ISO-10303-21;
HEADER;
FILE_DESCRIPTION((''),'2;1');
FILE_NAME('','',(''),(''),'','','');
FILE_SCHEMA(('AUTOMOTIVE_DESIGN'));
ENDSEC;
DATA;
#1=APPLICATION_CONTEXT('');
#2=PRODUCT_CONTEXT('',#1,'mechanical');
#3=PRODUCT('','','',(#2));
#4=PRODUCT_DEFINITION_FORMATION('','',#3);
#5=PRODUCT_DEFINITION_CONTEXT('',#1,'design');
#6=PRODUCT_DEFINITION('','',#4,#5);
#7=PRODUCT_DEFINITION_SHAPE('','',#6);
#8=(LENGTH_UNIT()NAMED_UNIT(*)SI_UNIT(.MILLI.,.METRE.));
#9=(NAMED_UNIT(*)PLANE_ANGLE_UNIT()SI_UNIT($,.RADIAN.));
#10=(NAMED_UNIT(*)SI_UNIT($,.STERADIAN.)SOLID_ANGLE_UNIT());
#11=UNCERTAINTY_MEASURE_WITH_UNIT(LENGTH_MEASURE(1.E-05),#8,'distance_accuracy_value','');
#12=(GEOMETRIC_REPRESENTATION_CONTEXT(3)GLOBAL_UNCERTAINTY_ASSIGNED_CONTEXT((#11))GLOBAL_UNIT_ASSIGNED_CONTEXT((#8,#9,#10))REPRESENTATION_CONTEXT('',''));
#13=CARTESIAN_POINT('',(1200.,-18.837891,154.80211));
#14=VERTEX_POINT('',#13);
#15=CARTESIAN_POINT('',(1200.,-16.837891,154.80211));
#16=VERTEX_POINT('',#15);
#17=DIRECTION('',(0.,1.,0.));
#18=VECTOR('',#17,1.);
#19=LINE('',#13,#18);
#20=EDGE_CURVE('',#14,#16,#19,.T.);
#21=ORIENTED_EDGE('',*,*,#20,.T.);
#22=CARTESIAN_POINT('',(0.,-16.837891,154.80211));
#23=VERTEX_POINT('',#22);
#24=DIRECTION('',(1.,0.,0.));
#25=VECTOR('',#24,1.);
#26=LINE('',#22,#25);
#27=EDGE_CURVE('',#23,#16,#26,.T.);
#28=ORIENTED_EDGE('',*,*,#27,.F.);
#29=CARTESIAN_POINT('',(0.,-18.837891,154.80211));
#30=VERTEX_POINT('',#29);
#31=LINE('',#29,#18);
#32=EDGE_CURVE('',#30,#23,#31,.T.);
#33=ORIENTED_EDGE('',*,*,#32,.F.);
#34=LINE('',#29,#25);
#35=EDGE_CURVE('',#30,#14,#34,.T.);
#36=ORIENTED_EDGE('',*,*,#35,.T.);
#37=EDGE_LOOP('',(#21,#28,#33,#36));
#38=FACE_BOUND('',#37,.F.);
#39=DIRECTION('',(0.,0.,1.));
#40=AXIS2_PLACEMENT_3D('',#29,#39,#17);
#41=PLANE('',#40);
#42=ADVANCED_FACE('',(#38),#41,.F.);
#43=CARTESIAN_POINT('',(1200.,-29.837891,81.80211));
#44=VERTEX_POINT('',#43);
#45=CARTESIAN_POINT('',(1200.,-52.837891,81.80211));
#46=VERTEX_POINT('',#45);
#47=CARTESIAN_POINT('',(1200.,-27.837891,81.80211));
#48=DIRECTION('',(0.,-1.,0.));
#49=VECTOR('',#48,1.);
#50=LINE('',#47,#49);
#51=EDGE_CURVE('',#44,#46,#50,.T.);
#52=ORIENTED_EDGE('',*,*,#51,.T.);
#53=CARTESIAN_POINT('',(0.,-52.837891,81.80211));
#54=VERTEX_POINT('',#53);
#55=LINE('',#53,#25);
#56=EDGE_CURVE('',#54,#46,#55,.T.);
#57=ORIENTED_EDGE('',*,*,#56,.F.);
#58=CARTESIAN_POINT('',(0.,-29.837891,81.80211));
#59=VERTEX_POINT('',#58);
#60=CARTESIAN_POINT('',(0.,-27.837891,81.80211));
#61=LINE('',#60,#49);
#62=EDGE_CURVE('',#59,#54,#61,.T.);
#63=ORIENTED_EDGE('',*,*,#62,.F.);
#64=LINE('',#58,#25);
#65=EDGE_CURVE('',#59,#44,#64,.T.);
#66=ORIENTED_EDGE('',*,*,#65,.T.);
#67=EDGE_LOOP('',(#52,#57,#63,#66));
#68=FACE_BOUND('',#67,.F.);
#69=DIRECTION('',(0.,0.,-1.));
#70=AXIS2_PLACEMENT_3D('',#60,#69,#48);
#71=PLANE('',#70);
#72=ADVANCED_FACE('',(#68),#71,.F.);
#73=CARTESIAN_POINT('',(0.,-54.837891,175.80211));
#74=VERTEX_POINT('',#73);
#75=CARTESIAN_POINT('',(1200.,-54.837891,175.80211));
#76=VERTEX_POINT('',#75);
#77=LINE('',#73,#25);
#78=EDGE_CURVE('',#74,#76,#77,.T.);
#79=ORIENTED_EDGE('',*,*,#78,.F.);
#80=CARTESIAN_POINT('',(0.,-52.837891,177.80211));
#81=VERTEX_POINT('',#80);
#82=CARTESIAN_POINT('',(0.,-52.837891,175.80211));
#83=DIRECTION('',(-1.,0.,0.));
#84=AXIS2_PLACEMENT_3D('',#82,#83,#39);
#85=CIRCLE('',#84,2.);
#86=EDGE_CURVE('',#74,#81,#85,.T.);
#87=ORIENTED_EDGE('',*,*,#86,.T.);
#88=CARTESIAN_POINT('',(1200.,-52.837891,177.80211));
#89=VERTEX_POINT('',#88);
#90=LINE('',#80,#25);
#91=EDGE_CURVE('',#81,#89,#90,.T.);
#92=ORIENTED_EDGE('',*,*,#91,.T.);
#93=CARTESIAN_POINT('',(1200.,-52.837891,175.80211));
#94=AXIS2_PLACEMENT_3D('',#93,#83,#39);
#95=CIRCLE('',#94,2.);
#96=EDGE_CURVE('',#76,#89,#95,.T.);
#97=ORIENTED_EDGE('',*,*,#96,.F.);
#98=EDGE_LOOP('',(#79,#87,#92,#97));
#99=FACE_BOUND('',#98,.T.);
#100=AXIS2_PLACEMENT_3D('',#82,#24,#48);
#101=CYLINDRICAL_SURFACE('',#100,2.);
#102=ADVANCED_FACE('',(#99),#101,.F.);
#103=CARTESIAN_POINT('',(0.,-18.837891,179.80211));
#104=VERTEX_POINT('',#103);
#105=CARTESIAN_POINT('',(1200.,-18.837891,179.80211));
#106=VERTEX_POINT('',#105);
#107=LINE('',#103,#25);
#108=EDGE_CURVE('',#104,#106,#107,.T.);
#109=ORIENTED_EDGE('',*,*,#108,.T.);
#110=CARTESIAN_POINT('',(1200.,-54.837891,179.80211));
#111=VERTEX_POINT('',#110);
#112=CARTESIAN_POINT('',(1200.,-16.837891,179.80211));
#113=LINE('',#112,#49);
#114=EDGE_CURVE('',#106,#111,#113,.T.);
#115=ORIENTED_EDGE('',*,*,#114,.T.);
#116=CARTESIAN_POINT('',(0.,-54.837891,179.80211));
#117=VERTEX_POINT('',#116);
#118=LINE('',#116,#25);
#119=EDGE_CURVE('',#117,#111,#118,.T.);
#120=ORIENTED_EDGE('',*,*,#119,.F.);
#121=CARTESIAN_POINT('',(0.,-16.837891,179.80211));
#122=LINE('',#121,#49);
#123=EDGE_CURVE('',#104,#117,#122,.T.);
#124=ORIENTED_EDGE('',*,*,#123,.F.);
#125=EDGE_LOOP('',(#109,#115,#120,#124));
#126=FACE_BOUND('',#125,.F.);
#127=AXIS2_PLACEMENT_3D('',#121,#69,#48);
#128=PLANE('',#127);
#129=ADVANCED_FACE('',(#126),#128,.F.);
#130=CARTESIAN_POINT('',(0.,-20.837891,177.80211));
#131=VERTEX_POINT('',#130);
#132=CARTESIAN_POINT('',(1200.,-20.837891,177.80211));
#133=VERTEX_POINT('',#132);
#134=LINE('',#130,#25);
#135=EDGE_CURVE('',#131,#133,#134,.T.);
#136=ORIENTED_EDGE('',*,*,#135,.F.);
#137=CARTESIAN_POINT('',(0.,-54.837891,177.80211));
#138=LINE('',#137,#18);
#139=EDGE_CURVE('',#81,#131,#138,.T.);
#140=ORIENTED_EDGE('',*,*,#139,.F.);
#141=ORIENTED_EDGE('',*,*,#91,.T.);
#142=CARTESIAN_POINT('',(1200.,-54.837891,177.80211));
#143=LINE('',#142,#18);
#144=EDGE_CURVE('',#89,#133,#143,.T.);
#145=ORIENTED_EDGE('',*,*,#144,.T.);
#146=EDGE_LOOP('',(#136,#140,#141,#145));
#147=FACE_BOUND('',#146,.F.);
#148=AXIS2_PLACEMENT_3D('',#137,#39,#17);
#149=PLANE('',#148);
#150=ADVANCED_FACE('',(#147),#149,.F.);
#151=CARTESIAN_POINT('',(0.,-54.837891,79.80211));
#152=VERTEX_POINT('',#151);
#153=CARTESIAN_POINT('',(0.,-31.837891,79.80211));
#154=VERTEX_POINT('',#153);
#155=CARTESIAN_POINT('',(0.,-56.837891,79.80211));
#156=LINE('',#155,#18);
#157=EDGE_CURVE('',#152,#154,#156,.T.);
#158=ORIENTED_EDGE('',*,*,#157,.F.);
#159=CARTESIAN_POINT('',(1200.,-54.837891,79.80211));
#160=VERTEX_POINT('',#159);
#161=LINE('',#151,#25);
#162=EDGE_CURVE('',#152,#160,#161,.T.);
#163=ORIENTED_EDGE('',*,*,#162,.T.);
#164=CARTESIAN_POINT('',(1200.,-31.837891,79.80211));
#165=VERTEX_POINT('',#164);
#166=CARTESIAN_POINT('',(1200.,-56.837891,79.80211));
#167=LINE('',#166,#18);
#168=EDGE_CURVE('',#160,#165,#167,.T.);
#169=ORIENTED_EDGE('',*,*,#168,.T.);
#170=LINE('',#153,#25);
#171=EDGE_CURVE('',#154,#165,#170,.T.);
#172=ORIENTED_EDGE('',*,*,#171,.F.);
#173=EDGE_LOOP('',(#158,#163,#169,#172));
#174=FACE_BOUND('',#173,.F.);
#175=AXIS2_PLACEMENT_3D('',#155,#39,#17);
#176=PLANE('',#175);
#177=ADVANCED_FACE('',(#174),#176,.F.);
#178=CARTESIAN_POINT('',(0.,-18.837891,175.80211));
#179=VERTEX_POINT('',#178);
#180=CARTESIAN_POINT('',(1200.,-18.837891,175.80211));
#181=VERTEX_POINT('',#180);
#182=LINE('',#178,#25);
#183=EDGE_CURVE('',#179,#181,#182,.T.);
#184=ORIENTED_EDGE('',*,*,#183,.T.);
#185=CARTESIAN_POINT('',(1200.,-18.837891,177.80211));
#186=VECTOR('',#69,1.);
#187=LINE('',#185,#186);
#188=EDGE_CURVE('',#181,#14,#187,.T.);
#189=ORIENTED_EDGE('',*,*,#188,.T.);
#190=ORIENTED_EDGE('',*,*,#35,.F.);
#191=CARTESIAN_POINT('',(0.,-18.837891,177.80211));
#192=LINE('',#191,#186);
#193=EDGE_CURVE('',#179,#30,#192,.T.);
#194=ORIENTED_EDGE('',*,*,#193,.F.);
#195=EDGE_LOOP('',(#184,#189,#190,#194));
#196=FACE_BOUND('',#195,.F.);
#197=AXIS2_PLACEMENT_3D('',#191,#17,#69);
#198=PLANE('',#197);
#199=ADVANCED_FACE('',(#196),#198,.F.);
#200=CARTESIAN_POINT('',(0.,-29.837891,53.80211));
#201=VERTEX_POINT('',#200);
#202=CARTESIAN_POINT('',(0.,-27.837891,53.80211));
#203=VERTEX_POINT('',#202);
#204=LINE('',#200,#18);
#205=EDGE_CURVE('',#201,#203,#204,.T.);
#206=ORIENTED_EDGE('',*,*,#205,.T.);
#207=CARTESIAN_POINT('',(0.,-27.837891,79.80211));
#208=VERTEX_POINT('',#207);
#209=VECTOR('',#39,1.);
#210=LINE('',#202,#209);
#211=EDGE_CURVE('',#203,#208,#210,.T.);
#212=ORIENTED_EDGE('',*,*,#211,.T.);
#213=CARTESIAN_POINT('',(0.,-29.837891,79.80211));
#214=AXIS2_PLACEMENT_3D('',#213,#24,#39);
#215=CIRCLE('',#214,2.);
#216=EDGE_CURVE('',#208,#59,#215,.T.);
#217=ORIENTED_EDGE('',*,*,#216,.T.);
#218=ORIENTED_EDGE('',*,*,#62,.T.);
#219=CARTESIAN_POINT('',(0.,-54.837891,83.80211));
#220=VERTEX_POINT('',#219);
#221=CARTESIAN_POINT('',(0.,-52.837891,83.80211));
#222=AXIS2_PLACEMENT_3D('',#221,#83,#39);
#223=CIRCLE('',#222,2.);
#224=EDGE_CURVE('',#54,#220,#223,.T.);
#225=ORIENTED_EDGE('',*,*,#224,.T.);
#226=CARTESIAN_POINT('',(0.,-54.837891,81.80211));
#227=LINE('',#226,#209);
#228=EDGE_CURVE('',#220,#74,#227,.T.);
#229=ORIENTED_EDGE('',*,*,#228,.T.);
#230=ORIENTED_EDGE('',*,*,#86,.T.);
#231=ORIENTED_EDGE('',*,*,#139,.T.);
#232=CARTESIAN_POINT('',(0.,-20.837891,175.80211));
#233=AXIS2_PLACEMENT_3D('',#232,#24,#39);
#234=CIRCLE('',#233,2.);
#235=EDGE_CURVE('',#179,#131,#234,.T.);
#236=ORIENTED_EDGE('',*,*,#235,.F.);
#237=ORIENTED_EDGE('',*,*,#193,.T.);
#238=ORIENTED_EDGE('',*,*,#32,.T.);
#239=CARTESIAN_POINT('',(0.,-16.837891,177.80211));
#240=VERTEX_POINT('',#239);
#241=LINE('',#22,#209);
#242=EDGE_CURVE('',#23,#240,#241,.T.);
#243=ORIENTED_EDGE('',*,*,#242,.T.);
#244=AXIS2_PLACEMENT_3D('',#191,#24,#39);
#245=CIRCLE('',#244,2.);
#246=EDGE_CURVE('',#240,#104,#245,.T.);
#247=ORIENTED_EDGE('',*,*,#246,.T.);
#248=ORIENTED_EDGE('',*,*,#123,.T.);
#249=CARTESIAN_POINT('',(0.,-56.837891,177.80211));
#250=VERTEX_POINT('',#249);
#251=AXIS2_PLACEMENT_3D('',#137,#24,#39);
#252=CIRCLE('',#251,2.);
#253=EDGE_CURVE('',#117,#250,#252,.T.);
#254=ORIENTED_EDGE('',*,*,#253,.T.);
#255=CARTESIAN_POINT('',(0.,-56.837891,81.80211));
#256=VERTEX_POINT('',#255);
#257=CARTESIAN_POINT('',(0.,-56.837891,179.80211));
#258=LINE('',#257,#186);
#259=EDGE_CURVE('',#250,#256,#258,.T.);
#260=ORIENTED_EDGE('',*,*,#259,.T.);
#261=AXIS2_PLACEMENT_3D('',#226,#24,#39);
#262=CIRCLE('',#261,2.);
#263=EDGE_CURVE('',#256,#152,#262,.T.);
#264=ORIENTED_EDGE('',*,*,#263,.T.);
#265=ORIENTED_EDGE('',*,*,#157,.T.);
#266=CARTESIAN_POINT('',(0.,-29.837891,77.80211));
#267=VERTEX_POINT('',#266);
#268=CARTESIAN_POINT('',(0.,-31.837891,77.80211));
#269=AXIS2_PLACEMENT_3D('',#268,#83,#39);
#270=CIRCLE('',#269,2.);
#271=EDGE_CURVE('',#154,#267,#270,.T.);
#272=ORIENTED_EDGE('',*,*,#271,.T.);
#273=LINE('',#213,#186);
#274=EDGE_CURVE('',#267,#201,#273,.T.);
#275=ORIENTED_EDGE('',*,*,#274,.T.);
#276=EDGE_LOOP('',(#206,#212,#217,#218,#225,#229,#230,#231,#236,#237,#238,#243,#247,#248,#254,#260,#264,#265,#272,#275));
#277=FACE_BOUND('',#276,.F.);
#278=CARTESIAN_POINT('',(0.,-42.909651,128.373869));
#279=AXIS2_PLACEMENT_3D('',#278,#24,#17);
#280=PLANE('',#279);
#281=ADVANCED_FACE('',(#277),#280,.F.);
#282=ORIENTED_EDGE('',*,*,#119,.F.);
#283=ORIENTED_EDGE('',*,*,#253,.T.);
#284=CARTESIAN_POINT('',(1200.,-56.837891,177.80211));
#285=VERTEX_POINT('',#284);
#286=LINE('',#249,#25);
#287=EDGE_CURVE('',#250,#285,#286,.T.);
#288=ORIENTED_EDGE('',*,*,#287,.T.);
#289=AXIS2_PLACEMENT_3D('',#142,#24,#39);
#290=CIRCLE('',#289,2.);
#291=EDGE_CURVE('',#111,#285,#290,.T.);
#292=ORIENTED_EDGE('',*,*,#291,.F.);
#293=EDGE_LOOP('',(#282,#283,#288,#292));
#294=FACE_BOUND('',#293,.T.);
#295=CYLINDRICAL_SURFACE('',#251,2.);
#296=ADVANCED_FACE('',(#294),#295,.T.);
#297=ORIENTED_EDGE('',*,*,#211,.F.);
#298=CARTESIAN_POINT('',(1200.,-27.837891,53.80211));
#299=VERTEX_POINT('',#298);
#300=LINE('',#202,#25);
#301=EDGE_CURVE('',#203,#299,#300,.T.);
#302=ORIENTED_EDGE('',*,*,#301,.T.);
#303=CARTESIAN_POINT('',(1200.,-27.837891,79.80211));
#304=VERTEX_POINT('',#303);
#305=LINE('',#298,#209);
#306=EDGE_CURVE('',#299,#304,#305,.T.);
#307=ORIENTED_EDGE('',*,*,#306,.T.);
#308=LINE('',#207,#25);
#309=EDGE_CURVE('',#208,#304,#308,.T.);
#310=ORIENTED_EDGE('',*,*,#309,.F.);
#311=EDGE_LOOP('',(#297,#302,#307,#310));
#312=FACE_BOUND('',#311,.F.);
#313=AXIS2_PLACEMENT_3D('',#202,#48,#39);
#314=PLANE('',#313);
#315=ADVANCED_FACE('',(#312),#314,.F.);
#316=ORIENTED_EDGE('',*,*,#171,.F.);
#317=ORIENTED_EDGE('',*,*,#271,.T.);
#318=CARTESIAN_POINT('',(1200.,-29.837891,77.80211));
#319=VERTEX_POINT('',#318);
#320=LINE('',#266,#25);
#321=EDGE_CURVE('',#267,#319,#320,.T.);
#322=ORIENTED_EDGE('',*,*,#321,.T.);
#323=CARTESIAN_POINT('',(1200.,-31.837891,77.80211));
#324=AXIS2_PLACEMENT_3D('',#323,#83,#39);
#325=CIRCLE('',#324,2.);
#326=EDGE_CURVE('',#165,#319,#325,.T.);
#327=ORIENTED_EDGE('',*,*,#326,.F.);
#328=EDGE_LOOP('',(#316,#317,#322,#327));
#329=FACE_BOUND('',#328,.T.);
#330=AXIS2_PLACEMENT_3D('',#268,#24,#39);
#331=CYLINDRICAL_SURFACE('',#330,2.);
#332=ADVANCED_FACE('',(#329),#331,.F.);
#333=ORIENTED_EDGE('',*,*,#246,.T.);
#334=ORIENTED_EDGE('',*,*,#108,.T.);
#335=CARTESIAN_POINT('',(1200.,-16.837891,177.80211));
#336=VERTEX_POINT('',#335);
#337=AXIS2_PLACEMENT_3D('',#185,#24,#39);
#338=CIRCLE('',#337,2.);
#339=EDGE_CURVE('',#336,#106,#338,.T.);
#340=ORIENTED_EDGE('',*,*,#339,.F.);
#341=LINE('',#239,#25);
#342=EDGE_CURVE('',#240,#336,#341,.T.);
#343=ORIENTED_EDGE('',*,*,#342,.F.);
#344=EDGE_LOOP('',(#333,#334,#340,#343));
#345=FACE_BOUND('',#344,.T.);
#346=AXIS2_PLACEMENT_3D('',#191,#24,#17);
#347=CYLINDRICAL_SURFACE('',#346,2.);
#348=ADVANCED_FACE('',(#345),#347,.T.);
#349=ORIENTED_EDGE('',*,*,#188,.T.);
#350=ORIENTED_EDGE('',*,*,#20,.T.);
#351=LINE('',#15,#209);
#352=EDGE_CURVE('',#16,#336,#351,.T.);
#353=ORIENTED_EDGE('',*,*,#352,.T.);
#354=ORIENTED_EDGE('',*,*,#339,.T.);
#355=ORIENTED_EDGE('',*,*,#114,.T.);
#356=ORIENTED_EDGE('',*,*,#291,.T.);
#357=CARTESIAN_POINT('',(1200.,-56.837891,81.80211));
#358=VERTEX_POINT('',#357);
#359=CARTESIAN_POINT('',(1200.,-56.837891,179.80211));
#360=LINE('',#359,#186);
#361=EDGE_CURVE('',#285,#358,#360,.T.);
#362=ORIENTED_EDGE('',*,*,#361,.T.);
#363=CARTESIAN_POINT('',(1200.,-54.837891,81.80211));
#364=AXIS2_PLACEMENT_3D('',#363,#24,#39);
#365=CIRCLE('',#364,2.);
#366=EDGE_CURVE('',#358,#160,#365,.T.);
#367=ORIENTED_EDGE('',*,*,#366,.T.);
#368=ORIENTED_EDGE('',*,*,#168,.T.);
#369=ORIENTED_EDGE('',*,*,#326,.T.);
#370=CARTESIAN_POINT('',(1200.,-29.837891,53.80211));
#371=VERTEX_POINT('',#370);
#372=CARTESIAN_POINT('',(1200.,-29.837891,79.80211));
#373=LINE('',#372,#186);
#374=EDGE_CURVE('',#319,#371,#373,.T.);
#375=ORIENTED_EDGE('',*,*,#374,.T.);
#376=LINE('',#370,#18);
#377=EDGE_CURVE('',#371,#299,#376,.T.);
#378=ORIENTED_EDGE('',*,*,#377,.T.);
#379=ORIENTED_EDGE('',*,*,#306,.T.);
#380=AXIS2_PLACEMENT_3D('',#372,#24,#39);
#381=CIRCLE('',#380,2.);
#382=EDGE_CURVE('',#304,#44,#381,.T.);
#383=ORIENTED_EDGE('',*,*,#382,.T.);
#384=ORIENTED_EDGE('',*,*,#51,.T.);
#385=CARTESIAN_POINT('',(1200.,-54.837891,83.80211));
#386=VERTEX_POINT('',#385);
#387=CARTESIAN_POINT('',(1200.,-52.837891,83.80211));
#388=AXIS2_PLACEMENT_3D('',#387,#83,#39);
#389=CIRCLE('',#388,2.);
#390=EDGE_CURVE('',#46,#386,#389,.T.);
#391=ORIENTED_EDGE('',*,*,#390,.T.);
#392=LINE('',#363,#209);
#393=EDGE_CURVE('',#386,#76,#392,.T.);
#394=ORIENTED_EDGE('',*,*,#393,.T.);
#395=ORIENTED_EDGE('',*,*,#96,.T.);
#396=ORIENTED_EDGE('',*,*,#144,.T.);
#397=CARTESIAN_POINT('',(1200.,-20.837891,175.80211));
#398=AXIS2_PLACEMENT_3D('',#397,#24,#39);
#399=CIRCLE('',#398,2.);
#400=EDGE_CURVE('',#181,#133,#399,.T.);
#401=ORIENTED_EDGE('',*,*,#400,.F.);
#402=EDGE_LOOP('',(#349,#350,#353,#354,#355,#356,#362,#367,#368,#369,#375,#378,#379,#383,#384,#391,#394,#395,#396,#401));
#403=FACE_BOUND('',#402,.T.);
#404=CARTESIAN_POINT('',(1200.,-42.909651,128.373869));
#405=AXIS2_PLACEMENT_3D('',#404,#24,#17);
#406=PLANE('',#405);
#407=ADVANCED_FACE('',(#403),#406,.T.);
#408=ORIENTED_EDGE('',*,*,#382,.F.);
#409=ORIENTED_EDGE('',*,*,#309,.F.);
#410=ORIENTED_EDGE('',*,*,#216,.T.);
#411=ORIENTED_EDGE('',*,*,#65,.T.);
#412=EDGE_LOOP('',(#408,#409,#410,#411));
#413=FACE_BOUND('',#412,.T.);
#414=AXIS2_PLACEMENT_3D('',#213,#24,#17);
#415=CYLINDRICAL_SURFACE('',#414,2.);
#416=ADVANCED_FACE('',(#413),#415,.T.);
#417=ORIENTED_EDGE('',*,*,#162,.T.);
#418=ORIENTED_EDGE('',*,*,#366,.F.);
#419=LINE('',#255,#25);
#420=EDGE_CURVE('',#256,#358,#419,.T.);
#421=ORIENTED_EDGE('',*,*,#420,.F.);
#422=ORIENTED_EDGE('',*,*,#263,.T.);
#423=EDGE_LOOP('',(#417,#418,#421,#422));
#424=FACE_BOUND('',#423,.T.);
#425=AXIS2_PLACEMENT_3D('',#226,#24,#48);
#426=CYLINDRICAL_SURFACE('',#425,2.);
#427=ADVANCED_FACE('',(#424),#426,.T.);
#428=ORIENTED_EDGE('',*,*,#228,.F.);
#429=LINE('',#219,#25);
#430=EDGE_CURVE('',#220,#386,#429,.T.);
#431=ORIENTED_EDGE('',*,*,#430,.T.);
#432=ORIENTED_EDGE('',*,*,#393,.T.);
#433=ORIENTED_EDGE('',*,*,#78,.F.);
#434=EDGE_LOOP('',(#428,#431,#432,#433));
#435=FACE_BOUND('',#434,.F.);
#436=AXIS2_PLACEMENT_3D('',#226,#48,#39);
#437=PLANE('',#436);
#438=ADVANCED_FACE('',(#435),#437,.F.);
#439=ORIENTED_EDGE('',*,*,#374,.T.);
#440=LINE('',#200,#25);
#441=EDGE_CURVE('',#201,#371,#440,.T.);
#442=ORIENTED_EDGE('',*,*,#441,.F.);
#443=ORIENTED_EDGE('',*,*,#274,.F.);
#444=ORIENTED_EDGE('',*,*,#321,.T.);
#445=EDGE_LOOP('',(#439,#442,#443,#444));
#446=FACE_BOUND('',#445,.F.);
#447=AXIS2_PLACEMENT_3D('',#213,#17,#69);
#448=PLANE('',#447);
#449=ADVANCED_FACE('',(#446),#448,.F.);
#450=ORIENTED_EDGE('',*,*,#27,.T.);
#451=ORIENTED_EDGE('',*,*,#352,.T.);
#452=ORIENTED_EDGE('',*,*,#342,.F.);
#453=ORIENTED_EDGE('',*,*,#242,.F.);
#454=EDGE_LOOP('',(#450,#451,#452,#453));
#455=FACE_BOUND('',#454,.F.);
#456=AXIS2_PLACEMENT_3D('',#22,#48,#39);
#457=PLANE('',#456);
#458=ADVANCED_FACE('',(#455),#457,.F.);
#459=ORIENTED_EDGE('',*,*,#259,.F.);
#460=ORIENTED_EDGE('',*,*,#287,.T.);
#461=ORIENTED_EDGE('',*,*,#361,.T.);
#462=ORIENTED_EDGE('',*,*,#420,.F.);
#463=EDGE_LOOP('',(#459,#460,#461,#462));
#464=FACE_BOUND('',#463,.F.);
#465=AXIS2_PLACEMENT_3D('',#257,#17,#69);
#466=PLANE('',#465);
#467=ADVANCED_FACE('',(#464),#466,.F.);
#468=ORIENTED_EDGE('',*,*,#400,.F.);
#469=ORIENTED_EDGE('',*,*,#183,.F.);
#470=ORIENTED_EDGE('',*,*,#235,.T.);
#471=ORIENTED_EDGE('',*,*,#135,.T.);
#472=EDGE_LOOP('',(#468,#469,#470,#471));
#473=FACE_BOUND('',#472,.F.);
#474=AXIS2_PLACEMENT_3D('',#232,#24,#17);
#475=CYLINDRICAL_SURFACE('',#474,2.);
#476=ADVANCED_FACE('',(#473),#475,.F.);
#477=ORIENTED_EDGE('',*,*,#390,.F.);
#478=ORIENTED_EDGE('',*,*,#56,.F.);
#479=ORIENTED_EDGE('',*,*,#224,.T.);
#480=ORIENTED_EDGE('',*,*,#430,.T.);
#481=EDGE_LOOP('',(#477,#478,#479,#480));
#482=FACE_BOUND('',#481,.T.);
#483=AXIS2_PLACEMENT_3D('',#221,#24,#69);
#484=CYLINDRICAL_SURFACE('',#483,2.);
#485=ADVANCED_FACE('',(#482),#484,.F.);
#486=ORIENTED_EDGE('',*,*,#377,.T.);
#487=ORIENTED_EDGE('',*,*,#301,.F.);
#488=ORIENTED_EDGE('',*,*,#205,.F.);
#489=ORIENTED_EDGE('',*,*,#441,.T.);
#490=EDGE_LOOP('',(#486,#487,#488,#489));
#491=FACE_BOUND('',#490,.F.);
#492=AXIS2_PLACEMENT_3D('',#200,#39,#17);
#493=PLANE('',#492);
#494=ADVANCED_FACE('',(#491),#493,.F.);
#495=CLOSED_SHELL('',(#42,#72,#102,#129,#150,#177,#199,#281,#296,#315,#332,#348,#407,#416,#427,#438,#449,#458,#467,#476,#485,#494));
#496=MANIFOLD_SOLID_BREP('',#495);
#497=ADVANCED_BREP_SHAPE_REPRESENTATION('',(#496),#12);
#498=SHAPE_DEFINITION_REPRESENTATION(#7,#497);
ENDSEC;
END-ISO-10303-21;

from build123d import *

# Parameters (mm, degrees)
F1_DEPTH = 1200
F2_R     = 2


# Not quite as in the source:
# - a feature names something its author has since deleted; it is built from what else it names


with BuildPart() as f1:
    # F0 (on Right) → F1 (new body)
    with BuildSketch(Plane.YZ):
        Polygon((-18.8378913403, 177.8021101952), (-18.8378913403, 154.8021101952), (-16.8378913403, 154.8021101952), (-16.8378913403, 179.8021101952), (-56.8378913403, 179.8021101952), (-56.8378913403, 79.8021101952), (-29.8378913403, 79.8021101952), (-29.8378913403, 53.8021101952), (-27.8378913403, 53.8021101952), (-27.8378913403, 81.8021101952), (-54.8378913403, 81.8021101952), (-54.8378913403, 177.8021101952), align=None)
    extrude(amount=F1_DEPTH)

    # F2
    f2_edges = [f1.edges().sort_by_distance(p)[0] for p in [
        (600, -56.837891, 179.80211),
        (600, -16.837891, 179.80211),
        (600, -56.837891, 79.80211),
        (600, -27.837891, 81.80211),
        (600, -54.837891, 81.80211),
        (600, -29.837891, 79.80211),
        (600, -18.837891, 177.80211),
        (600, -54.837891, 177.80211),
    ]]
    fillet(f2_edges, radius=F2_R)


solid = f1.part
